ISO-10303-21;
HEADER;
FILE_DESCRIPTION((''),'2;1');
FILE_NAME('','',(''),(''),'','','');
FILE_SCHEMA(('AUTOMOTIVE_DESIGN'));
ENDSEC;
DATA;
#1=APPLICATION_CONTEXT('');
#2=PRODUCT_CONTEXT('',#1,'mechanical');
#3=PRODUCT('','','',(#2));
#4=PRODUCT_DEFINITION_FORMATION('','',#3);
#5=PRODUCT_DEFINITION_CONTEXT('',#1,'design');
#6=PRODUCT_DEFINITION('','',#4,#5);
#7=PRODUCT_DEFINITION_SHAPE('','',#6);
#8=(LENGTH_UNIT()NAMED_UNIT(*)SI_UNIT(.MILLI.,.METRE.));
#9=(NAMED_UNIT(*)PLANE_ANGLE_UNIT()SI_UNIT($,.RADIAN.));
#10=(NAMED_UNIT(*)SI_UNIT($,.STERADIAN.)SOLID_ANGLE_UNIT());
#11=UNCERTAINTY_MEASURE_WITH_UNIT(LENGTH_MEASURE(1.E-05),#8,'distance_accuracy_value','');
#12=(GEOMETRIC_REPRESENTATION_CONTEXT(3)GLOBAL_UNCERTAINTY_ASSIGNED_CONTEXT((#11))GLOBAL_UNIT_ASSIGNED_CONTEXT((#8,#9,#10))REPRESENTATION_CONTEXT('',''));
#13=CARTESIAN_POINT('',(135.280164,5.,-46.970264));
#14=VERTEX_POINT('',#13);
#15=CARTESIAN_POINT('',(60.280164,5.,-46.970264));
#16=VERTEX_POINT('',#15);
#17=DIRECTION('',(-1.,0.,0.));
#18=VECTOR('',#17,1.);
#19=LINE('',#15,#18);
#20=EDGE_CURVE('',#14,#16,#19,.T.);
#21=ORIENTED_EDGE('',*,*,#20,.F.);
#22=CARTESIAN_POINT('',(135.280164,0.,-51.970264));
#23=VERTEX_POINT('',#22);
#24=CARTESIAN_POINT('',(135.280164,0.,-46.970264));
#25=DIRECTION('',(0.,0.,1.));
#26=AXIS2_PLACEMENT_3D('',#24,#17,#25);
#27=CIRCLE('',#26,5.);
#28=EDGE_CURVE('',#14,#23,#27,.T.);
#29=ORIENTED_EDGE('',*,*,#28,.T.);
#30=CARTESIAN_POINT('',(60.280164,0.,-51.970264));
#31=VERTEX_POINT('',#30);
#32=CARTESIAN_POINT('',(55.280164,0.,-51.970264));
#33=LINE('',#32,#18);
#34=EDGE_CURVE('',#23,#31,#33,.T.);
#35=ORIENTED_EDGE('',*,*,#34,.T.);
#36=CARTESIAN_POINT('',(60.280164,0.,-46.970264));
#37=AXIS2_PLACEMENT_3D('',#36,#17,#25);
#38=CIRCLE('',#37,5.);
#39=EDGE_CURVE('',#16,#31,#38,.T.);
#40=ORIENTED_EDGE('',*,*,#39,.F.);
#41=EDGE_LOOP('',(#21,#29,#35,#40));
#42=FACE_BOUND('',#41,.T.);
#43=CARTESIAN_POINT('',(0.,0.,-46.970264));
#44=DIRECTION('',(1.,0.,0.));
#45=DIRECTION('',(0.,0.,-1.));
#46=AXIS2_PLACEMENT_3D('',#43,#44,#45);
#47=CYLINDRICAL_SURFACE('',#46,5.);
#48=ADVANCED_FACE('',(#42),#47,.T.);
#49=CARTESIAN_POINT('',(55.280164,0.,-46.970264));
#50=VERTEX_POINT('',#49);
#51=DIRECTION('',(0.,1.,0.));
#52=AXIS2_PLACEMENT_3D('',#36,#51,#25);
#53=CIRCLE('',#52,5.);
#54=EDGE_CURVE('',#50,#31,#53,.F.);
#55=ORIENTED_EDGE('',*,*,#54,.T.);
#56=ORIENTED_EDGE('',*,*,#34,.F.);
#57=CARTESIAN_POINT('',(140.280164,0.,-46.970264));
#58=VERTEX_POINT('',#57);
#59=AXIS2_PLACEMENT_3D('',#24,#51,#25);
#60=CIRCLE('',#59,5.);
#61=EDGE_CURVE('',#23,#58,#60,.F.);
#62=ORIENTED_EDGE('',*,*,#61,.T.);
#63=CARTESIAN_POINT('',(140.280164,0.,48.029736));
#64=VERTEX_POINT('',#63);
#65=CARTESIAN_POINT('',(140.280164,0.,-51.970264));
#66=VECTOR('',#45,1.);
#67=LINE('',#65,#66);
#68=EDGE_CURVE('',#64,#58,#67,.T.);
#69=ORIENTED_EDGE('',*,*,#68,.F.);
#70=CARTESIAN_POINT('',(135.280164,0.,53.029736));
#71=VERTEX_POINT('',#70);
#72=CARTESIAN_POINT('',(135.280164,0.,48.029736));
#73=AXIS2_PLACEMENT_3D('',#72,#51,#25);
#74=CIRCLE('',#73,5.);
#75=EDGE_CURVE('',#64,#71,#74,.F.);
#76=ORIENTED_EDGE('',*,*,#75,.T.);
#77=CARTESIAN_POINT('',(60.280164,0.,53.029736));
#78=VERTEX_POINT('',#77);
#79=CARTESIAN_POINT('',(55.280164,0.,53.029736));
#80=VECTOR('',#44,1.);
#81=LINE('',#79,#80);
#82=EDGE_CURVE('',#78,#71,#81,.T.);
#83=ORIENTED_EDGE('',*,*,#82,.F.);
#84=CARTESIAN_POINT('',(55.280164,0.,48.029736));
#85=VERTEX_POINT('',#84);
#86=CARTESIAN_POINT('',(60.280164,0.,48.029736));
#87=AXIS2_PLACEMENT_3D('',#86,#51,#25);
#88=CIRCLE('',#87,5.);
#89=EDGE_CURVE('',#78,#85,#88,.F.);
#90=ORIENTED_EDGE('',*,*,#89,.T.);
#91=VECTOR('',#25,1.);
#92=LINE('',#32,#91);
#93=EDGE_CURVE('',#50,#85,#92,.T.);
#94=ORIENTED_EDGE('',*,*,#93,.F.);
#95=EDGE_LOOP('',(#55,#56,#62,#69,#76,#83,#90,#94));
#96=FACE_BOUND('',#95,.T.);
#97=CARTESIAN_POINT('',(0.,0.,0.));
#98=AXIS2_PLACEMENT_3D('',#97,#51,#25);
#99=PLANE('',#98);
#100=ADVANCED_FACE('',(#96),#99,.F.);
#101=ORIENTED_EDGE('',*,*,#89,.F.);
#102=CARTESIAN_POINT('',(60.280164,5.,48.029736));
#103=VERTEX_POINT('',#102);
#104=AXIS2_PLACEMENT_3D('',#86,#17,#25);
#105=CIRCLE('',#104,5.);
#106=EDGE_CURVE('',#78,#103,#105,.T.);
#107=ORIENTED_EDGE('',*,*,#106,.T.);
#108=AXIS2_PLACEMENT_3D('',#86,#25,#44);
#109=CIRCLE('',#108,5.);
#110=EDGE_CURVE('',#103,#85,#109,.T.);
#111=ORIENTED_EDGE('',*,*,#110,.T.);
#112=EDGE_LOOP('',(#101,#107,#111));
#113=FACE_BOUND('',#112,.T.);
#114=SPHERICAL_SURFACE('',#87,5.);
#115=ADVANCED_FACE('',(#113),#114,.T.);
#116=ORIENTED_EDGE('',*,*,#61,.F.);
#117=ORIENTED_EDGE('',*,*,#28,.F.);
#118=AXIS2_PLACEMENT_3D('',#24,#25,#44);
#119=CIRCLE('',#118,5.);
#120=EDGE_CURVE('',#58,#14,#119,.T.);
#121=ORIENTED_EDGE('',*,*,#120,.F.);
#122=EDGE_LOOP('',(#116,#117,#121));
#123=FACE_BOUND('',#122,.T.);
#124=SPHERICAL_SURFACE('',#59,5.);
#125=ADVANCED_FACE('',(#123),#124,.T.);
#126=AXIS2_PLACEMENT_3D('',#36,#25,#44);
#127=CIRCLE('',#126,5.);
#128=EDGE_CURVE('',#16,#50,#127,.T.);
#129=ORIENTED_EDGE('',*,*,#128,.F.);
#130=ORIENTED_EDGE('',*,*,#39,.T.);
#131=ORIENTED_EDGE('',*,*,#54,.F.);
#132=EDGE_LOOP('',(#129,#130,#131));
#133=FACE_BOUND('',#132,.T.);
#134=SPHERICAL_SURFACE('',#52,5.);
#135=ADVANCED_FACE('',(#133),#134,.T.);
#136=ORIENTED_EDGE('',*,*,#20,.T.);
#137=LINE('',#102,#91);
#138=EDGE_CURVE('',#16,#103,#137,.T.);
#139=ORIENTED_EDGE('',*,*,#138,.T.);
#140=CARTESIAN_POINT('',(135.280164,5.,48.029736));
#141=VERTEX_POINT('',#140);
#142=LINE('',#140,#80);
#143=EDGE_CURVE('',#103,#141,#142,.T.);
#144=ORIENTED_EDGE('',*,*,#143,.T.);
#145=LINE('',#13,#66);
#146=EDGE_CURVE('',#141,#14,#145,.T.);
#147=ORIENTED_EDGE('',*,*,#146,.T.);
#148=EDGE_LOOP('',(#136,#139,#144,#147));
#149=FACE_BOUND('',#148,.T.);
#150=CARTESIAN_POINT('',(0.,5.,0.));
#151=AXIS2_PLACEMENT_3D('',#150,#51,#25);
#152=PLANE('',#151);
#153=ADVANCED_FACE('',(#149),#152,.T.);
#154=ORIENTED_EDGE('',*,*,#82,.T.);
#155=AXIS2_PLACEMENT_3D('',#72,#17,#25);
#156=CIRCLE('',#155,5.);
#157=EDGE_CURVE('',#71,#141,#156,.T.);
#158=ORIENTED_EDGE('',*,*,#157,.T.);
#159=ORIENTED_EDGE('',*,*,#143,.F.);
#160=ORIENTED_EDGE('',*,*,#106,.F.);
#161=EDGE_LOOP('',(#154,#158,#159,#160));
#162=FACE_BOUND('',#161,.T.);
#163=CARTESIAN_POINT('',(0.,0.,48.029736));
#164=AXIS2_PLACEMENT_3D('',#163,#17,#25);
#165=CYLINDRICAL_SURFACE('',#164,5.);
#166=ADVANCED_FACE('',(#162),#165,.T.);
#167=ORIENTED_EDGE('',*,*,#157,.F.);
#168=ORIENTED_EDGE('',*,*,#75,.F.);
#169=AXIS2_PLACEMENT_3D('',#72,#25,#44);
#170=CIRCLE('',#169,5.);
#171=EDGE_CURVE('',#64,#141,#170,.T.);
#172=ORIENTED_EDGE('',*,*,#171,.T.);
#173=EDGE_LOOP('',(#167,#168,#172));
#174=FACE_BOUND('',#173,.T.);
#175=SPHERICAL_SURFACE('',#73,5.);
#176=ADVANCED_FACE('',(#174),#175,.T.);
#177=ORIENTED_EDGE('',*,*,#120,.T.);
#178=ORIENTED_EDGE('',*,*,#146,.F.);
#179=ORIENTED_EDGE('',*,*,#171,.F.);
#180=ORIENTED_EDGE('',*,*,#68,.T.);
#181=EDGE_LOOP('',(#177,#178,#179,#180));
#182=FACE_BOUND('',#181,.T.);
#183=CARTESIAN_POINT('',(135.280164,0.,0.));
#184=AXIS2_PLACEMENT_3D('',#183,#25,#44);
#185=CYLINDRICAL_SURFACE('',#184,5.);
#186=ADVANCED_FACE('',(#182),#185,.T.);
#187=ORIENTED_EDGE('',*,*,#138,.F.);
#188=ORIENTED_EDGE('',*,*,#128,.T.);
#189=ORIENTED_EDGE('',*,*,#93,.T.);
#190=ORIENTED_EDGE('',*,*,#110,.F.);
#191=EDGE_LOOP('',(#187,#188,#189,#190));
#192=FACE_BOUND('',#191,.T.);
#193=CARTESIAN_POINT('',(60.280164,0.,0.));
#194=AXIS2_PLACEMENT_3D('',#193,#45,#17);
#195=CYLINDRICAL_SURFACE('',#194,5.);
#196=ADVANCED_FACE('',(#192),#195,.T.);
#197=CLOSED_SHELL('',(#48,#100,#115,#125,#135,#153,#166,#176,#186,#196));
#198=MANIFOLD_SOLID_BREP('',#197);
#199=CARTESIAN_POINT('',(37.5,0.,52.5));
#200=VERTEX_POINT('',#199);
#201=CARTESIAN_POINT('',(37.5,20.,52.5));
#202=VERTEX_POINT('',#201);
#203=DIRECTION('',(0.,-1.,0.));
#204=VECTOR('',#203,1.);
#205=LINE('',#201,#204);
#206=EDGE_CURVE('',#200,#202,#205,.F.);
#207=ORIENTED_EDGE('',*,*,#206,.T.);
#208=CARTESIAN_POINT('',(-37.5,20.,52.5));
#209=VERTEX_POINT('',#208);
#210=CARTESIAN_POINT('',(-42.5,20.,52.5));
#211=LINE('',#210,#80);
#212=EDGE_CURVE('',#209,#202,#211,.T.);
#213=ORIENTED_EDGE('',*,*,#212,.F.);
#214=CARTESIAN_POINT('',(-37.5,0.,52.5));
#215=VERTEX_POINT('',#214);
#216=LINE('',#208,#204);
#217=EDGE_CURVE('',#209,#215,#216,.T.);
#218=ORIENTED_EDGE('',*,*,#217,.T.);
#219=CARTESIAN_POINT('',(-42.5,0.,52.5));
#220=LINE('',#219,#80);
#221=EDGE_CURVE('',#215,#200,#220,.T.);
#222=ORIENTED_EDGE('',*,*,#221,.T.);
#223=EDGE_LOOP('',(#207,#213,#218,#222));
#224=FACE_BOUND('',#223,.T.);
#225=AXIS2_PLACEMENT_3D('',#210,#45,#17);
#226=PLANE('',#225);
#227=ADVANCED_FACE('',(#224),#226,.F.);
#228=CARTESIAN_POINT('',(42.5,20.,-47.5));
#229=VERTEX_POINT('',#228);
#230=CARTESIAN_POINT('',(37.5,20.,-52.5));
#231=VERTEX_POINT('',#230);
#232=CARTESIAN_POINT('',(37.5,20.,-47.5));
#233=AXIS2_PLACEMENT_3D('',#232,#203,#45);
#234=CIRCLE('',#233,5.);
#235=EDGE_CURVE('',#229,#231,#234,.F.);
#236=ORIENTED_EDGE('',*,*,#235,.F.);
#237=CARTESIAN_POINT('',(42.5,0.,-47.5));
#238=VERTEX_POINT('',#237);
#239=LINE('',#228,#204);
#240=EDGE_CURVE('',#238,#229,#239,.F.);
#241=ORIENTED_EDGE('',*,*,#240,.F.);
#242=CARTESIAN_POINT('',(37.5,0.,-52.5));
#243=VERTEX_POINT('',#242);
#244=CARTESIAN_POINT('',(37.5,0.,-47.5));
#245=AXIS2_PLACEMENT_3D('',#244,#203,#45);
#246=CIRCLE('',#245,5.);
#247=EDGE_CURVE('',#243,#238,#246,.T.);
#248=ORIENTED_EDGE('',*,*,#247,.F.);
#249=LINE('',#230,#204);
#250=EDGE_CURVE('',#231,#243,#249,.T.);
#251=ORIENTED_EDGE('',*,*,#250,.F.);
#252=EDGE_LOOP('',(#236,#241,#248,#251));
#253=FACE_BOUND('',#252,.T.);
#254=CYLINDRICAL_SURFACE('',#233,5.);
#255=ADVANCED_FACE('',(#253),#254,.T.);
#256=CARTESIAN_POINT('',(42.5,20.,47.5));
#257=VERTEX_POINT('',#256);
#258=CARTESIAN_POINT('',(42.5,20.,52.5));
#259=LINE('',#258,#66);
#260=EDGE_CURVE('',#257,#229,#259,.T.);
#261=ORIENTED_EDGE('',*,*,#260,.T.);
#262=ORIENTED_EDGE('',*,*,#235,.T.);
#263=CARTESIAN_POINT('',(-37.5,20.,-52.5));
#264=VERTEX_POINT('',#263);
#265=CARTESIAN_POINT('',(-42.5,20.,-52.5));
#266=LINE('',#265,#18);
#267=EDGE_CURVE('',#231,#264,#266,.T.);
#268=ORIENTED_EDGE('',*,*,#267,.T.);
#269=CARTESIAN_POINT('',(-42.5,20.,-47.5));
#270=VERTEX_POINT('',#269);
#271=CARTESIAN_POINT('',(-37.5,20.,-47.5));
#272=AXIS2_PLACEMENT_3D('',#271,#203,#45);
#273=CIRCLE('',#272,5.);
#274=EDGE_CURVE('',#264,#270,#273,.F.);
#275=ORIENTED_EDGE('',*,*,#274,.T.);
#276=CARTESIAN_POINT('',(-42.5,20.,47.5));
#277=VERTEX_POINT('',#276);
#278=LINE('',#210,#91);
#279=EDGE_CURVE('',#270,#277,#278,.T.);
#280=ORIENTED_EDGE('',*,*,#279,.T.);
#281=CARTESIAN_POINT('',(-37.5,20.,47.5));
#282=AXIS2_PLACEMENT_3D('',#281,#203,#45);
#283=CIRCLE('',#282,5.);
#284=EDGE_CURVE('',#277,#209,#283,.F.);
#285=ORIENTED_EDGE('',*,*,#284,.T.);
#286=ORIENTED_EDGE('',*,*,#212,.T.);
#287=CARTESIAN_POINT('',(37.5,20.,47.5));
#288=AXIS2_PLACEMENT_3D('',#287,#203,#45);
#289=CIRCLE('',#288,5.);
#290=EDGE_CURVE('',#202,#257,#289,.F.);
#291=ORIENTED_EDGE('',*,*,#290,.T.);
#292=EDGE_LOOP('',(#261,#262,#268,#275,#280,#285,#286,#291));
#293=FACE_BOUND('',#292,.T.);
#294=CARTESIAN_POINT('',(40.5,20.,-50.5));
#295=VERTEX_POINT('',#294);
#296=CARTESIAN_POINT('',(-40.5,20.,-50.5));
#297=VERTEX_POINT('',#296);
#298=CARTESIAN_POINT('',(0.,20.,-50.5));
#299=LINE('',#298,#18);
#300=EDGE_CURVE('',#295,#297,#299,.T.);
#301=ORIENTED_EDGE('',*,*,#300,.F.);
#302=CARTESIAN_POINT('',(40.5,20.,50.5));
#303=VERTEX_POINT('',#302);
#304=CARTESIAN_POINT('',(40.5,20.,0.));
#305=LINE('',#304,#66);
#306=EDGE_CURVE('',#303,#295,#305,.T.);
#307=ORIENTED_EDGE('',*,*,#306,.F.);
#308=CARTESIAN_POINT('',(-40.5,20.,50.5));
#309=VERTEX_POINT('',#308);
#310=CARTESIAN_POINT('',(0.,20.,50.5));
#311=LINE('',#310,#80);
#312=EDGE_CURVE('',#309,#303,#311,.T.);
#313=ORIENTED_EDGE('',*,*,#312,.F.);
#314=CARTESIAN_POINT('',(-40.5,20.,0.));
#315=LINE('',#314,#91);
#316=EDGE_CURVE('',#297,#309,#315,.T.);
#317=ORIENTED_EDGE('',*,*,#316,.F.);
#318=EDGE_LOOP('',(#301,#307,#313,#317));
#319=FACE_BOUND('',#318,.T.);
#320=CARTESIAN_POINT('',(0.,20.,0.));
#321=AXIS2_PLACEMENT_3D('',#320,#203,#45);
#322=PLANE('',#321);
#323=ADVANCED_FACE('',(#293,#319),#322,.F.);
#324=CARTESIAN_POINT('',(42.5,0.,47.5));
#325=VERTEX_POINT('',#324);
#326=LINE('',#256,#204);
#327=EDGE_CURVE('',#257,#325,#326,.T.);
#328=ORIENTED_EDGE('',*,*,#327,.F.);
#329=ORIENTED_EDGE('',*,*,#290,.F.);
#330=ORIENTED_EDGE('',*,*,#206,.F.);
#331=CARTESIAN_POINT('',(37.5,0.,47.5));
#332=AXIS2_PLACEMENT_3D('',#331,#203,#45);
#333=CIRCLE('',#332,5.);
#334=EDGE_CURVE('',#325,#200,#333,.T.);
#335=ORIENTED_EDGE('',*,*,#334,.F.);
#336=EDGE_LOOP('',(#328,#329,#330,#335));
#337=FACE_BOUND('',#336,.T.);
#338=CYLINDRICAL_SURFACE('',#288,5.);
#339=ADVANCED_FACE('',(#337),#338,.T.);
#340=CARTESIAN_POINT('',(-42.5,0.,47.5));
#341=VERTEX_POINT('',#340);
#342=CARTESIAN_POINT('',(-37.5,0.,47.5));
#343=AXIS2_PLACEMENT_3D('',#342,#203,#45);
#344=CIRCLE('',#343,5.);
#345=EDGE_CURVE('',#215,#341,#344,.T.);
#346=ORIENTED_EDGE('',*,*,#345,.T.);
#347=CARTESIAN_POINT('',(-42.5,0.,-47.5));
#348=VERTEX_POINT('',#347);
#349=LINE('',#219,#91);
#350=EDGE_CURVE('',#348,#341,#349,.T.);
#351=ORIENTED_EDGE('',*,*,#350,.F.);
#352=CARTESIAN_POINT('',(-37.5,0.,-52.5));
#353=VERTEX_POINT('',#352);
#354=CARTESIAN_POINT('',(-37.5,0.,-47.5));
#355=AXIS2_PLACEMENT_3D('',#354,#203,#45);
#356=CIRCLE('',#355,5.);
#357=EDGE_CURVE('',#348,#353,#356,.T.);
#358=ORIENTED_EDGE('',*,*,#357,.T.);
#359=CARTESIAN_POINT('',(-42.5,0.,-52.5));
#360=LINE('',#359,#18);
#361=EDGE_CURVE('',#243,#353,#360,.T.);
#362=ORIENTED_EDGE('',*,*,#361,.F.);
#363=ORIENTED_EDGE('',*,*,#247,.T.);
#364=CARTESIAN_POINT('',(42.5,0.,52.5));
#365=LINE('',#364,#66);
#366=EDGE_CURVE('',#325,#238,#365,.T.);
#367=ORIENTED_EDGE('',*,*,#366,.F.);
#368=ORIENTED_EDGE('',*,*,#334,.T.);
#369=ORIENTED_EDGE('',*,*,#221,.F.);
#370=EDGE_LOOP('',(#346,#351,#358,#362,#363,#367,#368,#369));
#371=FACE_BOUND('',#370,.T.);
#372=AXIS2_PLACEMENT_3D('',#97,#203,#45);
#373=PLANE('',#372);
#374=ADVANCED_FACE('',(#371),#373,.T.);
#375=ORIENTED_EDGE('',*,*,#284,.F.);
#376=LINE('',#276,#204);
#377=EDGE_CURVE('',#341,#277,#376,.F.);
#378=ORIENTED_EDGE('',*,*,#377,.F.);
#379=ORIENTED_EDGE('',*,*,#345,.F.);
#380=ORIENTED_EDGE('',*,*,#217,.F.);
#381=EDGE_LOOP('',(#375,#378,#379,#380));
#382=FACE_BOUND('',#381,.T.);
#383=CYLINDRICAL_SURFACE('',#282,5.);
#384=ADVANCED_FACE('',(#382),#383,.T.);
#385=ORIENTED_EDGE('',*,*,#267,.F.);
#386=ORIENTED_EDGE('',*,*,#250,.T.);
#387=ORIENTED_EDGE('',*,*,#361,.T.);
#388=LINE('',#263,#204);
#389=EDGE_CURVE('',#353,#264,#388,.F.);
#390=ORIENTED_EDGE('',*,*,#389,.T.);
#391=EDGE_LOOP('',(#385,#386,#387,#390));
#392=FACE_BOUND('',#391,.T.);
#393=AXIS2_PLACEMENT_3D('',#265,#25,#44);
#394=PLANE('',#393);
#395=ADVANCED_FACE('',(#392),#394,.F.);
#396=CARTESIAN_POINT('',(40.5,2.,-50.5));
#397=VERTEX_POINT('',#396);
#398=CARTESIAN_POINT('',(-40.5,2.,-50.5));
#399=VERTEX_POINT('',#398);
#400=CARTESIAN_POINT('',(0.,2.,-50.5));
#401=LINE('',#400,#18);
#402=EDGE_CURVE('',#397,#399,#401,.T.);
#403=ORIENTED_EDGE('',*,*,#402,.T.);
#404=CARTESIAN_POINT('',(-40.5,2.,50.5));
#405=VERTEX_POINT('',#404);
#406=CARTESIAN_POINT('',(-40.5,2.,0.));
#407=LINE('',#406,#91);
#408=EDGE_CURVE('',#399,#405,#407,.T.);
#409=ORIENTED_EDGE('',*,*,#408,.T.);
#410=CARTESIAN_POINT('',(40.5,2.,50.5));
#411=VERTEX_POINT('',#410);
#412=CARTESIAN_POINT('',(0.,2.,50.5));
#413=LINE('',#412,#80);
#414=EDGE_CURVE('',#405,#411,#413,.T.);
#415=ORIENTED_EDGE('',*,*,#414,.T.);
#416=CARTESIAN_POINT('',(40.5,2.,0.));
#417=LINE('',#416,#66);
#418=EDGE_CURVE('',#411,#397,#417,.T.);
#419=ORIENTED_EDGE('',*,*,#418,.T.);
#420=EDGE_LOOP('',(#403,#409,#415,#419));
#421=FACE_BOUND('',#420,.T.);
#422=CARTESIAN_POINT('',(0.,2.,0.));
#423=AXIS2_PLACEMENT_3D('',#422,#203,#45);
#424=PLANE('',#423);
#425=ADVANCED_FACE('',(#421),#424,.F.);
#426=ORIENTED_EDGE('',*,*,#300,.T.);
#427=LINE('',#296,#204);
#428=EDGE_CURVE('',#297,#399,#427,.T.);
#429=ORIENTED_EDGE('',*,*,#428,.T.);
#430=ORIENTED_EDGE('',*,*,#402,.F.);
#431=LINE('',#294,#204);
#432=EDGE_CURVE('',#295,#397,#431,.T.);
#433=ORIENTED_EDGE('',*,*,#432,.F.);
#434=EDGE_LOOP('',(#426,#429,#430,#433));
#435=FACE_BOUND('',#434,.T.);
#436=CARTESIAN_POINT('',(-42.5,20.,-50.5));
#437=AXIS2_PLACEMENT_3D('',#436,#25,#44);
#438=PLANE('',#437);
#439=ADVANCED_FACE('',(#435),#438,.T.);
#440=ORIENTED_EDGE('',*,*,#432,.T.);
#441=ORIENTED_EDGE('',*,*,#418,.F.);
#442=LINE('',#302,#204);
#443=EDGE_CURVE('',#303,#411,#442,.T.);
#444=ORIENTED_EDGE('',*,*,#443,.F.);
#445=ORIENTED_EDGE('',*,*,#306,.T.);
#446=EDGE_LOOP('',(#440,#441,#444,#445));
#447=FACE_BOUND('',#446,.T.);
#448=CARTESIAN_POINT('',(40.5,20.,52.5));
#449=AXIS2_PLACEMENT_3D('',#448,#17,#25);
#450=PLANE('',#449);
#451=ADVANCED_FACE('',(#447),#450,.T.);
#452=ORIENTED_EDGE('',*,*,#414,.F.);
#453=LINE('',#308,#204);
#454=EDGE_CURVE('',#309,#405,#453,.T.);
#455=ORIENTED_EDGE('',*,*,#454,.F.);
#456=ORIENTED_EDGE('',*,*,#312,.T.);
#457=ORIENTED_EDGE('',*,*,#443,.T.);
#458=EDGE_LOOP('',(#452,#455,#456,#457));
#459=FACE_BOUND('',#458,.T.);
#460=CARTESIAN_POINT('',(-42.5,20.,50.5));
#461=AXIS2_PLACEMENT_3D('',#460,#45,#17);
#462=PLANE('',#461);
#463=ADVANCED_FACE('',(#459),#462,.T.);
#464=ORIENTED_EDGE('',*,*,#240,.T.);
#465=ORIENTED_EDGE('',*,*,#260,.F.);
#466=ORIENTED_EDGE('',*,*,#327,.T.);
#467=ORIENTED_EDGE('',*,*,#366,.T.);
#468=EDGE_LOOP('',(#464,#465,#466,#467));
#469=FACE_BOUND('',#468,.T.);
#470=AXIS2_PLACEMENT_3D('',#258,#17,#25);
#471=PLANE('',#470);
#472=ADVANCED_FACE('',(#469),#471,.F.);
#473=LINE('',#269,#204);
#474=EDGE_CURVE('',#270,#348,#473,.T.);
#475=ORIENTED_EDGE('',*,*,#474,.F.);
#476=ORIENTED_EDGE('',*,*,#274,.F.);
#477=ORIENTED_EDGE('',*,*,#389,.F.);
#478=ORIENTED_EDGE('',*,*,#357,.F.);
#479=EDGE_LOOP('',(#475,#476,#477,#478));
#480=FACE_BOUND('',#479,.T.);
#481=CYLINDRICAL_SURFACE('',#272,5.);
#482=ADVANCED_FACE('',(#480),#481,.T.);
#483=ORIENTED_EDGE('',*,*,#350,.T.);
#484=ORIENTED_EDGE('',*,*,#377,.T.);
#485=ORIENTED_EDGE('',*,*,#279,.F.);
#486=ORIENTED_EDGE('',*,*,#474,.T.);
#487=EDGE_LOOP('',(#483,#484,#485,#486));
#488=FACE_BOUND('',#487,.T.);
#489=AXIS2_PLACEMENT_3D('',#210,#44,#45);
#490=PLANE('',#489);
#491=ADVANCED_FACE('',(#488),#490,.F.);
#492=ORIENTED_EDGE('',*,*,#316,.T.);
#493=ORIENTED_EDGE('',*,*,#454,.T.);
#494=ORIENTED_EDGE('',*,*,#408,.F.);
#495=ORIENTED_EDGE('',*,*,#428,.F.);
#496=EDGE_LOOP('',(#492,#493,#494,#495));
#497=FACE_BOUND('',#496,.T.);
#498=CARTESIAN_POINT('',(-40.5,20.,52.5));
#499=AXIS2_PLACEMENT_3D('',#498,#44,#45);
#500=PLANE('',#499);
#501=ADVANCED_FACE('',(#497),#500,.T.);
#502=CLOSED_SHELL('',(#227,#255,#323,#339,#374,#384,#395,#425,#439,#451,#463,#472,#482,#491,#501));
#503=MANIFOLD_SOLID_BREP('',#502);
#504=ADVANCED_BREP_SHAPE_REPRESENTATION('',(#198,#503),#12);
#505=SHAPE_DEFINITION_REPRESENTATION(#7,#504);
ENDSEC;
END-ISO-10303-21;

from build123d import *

# Parameters (mm, degrees)
SKETCH1_W           = 85
SKETCH1_H           = 105
BOSS_EXTRUDE1_DEPTH = 20
SHELL1_T            = -2
SKETCH2_W           = 85
SKETCH2_H           = 105
BOSS_EXTRUDE2_DEPTH = 5
FILLET1_R           = 5
FILLET2_R           = 5
FILLET3_R           = 5


with BuildPart() as part:
    # Sketch1 → Boss-Extrude1 (new body)
    with BuildSketch(Plane(origin=(0, 0, 0), x_dir=(1, 0, 0), z_dir=(0, 1, 0))):
        Rectangle(SKETCH1_W, SKETCH1_H)
    extrude(amount=BOSS_EXTRUDE1_DEPTH)

    # Shell1
    shell1_openings = [part.faces().sort_by_distance(p)[0] for p in [
        (0, 20, 0),
    ]]
    offset(amount=SHELL1_T, openings=shell1_openings, kind=Kind.INTERSECTION)

    # Fillet1
    fillet1_edges = [part.edges().sort_by_distance(p)[0] for p in [
        (42.5, 10, 52.5),
        (-42.5, 10, 52.5),
        (-42.5, 10, -52.5),
        (42.5, 10, -52.5),
    ]]
    fillet(fillet1_edges, radius=FILLET1_R)


with BuildPart() as body_2:
    # Sketch2 → Boss-Extrude2 (new body)
    with BuildSketch(Plane(origin=(11.543615237, 0, 0), x_dir=(1, 0, 0), z_dir=(0, 1, 0))):
        with Locations((86.236548959, -0.529735839)):
            Rectangle(SKETCH2_W, SKETCH2_H)
    extrude(amount=BOSS_EXTRUDE2_DEPTH)

    # Fillet2
    fillet2_edges = [body_2.edges().sort_by_distance(p)[0] for p in [
        (55.280164195, 2.5, -51.970264161),
        (140.280164195, 2.5, -51.970264161),
        (140.280164195, 2.5, 53.029735839),
        (55.280164195, 2.5, 53.029735839),
    ]]
    fillet(fillet2_edges, radius=FILLET2_R)

    # Fillet3
    fillet3_edges = [body_2.edges().sort_by_distance(p)[0] for p in [
        (56.744630289, 5, 51.565269745),
        (55.280164195, 5, 0.529735839),
        (56.744630289, 5, -50.505798067),
        (97.780164195, 5, -51.970264161),
        (138.815698101, 5, -50.505798067),
        (140.280164195, 5, 0.529735839),
        (138.815698101, 5, 51.565269745),
        (97.780164195, 5, 53.029735839),
    ]]
    fillet(fillet3_edges, radius=FILLET3_R - 0.0001)  # a hair under: the kernel refuses the full size


solid = Compound([part.part, body_2.part])
